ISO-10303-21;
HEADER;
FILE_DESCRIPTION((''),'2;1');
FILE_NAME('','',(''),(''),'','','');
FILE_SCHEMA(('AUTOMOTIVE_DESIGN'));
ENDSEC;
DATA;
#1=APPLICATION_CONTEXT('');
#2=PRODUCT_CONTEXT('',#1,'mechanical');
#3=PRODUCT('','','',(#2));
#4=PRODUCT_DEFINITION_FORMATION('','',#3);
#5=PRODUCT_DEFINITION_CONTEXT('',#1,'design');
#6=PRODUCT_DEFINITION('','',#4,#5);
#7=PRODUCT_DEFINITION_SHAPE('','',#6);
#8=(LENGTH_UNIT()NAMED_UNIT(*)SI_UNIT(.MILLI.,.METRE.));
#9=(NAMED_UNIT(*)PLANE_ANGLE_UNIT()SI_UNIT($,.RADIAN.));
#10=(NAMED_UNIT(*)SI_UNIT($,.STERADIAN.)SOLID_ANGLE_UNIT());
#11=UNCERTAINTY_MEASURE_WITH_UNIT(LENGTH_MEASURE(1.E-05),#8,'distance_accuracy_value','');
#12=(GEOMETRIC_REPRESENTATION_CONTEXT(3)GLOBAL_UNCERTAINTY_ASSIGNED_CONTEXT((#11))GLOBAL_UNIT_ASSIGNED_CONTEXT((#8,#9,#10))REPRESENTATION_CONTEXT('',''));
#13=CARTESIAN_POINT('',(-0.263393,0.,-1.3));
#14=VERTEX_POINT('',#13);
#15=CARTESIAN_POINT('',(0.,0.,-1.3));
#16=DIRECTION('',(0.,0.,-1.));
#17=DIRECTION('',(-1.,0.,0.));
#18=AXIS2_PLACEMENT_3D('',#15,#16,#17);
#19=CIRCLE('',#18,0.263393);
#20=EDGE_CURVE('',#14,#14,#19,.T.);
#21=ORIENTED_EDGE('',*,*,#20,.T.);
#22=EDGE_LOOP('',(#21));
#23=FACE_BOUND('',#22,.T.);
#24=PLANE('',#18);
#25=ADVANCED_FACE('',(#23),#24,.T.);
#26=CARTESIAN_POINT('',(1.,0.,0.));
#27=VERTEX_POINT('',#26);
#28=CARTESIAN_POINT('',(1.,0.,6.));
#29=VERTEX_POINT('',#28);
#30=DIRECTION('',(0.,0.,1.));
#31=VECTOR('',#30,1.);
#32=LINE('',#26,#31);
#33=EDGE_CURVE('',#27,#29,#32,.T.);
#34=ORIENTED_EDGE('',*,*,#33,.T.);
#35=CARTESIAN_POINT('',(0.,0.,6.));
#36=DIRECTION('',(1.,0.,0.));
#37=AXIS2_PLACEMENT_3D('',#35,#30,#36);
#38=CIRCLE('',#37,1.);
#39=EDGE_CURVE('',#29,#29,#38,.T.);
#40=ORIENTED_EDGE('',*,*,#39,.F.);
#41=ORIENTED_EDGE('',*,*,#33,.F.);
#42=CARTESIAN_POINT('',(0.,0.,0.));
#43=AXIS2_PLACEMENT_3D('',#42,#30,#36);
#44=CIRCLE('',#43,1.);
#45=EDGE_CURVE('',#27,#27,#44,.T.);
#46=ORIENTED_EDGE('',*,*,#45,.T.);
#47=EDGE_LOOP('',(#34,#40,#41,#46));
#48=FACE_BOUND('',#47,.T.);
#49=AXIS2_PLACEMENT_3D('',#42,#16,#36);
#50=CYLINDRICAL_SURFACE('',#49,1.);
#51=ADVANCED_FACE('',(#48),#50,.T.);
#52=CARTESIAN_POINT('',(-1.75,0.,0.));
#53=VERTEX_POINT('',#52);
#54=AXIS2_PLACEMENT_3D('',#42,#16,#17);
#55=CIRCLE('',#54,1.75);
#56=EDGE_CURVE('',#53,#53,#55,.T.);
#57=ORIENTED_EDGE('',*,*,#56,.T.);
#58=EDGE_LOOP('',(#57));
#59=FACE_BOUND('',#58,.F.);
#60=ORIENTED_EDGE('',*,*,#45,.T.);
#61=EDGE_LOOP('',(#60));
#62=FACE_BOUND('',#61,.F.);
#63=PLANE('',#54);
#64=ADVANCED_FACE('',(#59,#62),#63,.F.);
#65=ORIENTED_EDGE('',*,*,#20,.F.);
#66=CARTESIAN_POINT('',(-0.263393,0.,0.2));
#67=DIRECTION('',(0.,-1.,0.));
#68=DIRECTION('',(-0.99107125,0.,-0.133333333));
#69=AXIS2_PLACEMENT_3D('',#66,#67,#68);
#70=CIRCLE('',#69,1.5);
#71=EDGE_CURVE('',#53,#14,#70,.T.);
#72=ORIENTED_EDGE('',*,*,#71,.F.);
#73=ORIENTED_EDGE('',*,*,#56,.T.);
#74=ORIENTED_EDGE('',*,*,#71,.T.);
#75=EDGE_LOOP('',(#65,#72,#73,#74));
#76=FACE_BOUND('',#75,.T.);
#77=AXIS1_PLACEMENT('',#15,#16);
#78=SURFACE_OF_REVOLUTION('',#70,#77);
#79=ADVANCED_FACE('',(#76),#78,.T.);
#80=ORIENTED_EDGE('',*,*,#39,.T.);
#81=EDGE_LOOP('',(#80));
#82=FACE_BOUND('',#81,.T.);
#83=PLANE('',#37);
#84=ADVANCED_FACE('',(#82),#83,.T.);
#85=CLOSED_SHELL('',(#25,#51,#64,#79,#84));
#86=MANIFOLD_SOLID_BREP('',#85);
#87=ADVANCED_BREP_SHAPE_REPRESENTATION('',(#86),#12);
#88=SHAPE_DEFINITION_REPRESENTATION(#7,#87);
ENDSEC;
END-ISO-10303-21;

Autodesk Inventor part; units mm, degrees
ref_plane "YZ Plane" through (0, 0, 0) normal (1, 0, 0) x (0, 1, 0)
ref_plane "XZ Plane" through (0, 0, 0) normal (0, 1, 0) x (-1, 0, 0)
ref_plane "XY Plane" through (0, 0, 0) normal (0, 0, 1) x (1, 0, 0)
sketch "スケッチ1" plane through (0, 0, 0) normal (0, 0, 1) x (1, 0, 0)
  circle A0 centre (0, 0) radius 1
  dimension "d0" = 2
extrude "押し出し1" add sketch "スケッチ1" along normal blind 6
sketch "スケッチ2" plane through (0, 0, 0) normal (0, 0, -1) x (-1, 0, 0)
  circle A0 centre (0, 0) radius 1.75
  dimension "d3" = 3.5
extrude "押し出し2" add sketch "スケッチ2" along normal blind 1.3
fillet "フィレット1" radius 1.5 1 edges at (1.75, 0, -1.3)
thread "ねじ2" size "M2x0.4" class "6g" standard "ANSI Metric M Profile" full length
properties part number "ネジボタンM2L6" material "鋼、高強度、低合金"
